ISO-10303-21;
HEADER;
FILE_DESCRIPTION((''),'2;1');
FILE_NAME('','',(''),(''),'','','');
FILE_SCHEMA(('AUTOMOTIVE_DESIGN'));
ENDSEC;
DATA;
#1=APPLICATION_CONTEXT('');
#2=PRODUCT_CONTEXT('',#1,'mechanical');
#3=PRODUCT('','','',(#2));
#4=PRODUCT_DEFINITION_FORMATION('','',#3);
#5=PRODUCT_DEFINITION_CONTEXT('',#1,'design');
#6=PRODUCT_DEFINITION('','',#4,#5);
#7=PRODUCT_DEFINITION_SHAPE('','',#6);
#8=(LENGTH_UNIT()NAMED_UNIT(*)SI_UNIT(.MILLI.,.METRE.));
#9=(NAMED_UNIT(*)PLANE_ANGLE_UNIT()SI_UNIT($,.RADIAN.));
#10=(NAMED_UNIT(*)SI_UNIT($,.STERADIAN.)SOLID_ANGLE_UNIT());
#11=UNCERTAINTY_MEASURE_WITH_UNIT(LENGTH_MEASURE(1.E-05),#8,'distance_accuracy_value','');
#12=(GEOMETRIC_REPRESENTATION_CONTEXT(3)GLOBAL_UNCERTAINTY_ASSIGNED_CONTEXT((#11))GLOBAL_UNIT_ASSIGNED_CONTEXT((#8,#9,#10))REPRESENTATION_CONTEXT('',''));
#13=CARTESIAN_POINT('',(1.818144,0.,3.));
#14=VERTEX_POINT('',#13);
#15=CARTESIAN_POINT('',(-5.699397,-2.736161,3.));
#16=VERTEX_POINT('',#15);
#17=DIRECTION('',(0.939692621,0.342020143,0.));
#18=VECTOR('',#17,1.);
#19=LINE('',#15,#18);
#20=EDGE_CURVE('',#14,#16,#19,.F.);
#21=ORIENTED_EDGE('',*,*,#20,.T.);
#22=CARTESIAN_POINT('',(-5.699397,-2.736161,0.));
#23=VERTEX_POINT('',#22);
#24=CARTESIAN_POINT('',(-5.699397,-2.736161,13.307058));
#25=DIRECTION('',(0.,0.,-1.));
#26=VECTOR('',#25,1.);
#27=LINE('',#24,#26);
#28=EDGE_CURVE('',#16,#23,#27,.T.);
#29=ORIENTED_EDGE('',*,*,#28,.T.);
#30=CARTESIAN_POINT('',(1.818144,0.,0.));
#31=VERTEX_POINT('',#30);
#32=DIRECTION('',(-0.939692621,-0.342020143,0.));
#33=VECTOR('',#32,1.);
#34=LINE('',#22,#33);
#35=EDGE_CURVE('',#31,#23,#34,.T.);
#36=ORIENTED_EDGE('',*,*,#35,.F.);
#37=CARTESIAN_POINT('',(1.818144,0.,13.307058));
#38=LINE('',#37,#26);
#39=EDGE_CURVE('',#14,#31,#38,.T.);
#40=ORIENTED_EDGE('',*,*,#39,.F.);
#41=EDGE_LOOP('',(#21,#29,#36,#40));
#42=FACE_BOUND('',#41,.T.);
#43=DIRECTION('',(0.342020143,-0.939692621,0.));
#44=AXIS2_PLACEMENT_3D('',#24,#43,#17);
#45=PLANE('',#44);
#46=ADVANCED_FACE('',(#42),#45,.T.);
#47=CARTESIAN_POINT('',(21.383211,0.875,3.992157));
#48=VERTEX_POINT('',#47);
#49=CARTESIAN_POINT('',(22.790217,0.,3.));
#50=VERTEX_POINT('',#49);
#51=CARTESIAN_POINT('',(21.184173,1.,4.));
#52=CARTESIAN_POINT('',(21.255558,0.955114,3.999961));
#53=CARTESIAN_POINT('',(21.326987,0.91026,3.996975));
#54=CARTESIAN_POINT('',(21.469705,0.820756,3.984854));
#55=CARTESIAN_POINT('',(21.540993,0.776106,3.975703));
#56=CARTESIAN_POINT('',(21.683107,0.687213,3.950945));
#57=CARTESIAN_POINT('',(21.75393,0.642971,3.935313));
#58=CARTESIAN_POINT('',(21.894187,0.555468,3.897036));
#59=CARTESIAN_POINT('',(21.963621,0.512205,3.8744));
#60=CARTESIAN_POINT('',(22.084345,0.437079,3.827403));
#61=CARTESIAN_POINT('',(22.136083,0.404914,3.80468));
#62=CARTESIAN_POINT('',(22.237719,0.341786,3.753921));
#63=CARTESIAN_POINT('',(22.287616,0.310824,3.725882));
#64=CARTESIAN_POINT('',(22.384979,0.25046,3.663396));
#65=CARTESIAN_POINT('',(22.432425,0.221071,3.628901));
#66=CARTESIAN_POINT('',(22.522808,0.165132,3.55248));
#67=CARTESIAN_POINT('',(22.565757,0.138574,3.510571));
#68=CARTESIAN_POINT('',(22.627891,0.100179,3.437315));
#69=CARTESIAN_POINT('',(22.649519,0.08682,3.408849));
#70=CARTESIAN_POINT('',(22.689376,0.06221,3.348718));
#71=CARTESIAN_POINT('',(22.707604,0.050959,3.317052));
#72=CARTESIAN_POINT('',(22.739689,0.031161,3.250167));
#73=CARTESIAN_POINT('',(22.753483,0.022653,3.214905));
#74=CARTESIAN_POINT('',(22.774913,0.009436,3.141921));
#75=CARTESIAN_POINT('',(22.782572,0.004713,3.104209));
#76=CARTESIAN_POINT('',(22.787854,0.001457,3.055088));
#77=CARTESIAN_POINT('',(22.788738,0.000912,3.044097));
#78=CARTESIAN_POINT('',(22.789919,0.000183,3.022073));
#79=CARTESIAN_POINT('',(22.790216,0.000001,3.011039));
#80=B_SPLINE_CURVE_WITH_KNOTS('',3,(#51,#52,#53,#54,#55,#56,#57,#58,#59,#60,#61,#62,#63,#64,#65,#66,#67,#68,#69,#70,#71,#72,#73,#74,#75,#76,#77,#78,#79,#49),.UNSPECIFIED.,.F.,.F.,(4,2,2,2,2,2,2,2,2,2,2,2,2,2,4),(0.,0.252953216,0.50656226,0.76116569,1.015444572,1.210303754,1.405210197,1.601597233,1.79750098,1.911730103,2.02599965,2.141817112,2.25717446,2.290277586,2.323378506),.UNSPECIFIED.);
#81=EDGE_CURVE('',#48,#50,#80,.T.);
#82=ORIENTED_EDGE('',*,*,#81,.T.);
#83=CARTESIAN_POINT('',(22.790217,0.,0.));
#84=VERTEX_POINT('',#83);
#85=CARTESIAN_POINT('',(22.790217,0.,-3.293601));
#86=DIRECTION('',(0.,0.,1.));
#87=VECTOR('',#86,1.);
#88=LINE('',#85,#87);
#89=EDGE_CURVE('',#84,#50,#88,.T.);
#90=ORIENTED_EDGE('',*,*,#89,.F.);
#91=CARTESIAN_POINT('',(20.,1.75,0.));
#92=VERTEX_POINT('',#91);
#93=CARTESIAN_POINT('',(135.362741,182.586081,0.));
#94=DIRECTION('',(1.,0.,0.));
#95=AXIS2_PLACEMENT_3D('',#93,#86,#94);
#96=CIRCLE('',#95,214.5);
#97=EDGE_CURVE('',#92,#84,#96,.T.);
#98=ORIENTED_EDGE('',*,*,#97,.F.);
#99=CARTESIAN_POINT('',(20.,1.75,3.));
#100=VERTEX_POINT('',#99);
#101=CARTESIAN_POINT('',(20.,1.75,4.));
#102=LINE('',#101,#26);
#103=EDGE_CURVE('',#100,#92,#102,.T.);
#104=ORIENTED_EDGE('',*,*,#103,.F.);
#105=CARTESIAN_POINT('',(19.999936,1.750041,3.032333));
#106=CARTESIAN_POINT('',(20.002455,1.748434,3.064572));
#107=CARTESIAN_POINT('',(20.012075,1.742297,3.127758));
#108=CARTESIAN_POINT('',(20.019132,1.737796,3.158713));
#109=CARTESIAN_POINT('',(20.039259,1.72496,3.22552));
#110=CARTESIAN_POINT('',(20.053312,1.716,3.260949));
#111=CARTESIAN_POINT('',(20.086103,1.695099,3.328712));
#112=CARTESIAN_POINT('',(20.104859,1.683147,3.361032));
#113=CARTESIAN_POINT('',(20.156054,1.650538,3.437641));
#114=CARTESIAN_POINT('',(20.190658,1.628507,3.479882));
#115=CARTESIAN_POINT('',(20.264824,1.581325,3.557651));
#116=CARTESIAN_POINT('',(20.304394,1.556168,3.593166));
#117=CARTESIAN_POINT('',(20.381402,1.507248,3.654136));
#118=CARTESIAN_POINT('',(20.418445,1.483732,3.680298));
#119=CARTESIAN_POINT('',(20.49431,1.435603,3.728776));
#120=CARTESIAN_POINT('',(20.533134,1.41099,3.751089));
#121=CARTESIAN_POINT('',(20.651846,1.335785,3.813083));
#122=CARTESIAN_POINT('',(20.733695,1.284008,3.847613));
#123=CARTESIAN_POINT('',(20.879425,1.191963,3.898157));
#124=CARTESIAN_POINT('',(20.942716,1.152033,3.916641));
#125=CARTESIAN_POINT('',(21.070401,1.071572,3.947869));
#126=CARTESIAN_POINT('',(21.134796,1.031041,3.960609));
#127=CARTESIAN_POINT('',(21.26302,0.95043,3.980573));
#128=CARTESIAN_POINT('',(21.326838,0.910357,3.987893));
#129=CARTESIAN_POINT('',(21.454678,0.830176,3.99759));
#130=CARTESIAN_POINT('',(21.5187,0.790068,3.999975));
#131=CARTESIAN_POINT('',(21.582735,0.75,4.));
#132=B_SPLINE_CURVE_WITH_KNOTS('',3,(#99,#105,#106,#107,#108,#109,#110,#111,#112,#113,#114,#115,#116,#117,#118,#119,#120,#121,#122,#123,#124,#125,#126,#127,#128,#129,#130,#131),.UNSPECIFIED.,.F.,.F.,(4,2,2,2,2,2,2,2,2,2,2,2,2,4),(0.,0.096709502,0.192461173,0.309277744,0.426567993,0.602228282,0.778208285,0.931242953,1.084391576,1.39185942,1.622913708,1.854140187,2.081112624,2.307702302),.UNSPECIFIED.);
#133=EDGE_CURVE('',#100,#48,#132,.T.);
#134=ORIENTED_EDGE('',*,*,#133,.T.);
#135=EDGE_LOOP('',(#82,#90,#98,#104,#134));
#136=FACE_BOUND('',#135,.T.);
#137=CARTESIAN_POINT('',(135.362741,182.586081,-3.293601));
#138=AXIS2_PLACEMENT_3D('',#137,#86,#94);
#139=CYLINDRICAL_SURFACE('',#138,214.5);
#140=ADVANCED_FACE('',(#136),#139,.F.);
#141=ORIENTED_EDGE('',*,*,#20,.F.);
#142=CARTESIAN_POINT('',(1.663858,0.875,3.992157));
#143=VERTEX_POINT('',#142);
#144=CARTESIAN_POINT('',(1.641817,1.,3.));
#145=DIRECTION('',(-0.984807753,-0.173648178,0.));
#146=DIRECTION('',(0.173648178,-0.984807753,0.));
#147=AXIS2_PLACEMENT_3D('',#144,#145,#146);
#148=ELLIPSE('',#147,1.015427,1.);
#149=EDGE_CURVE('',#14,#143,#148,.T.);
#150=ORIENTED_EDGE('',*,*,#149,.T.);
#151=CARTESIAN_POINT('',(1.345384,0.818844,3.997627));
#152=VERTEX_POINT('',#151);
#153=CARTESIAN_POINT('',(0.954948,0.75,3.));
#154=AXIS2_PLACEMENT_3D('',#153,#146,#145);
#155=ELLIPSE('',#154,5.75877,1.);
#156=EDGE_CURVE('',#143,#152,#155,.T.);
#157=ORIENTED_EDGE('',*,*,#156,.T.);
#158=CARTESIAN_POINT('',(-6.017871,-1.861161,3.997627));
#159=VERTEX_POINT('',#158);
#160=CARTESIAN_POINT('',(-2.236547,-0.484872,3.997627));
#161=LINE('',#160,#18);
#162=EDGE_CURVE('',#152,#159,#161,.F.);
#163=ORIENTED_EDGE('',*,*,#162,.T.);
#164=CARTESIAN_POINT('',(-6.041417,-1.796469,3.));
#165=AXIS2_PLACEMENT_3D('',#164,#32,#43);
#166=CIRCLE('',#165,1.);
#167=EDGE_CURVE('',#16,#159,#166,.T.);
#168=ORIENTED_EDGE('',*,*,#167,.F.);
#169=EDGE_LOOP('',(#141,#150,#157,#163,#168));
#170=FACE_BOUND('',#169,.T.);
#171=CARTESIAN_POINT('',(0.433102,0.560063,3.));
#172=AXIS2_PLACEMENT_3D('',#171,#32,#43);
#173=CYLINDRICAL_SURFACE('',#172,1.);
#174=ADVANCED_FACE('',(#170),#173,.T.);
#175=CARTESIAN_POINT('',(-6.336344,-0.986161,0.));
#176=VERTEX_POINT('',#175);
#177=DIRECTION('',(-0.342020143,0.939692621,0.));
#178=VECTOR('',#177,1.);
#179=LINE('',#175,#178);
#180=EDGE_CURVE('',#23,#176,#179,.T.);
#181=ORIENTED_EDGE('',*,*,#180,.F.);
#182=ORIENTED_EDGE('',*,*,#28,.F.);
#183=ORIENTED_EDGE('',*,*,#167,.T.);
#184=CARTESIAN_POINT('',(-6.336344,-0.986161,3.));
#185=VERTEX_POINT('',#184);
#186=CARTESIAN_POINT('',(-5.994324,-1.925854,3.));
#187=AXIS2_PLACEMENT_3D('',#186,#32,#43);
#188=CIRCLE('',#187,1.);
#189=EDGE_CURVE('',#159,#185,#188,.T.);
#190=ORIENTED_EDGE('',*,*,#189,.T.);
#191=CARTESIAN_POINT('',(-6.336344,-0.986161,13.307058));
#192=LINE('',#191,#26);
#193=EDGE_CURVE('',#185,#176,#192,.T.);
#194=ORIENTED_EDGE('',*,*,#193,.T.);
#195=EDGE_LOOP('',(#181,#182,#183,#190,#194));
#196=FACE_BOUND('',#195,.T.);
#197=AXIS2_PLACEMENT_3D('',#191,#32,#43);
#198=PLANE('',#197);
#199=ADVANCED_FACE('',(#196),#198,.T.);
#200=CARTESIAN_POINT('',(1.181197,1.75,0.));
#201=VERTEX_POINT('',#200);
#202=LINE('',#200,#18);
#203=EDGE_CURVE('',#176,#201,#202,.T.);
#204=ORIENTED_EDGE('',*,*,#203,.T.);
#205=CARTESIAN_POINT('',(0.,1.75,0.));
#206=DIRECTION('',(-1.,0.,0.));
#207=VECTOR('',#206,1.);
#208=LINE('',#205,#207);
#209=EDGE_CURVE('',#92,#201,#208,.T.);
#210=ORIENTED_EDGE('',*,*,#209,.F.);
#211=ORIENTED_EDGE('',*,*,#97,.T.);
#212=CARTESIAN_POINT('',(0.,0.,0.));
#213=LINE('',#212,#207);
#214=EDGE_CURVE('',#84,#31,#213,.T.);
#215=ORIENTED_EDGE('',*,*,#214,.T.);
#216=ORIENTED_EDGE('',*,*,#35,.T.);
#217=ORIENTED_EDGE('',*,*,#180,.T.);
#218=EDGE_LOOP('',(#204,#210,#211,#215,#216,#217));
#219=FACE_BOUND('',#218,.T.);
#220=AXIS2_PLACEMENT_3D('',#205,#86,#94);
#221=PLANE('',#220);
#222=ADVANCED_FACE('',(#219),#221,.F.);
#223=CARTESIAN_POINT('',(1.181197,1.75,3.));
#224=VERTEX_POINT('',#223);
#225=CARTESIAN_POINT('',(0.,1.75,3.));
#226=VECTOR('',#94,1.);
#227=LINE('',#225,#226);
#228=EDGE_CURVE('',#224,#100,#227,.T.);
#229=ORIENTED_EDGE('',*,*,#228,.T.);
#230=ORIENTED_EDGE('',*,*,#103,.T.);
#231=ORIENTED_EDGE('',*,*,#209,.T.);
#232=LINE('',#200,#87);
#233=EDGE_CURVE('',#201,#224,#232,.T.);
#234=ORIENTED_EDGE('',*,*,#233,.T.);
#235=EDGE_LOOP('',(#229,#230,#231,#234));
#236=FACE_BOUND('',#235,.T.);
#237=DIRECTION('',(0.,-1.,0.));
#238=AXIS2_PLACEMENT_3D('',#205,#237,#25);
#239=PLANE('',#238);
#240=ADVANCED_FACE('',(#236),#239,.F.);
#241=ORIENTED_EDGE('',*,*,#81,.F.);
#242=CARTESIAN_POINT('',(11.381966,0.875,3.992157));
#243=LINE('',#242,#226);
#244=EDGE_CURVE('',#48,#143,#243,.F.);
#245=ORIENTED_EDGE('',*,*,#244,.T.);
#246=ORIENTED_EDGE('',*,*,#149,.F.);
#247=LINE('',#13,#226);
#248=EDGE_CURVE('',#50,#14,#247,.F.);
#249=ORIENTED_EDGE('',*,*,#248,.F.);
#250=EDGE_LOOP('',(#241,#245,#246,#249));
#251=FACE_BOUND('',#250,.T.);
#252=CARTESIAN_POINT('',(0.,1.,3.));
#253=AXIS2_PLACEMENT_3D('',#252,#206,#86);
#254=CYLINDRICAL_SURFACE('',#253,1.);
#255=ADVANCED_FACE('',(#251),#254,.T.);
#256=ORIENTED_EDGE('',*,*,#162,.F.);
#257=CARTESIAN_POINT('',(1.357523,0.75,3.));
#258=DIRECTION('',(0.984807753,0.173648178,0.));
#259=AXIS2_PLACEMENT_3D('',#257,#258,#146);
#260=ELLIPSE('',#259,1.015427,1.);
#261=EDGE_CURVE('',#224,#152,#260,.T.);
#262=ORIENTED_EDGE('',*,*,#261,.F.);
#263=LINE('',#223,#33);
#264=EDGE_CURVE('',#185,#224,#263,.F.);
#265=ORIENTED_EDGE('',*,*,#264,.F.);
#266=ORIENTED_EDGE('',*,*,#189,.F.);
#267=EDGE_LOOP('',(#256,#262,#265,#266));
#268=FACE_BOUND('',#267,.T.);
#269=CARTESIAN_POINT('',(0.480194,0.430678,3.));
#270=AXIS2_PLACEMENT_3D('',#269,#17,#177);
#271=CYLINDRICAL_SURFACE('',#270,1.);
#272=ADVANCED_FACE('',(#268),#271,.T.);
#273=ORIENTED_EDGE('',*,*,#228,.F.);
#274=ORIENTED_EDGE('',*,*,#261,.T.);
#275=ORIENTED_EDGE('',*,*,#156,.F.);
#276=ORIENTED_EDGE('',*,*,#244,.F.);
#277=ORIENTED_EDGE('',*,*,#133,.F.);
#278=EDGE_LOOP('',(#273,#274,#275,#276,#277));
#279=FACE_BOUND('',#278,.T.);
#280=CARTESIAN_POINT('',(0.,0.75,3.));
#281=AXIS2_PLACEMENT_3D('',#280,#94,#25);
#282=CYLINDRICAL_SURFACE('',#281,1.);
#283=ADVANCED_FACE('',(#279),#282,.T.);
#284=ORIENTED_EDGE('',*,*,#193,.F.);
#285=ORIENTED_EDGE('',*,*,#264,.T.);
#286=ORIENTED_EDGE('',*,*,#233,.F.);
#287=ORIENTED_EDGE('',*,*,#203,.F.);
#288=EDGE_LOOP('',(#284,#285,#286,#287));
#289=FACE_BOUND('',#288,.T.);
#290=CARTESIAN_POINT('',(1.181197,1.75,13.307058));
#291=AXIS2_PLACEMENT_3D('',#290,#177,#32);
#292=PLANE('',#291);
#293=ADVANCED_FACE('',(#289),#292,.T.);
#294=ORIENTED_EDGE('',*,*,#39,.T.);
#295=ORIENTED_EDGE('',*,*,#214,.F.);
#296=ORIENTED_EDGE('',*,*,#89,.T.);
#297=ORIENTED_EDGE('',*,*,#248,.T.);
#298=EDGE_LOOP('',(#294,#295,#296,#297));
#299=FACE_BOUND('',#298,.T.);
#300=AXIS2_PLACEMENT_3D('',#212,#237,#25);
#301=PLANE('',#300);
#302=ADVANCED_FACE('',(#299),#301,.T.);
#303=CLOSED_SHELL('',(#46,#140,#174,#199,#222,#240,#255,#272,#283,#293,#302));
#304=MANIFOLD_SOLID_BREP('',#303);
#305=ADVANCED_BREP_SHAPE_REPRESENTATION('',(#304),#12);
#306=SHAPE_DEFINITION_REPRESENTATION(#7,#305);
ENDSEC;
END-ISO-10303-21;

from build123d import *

# Parameters (mm, degrees)
SKETCH_1_W          = 20
SKETCH_1_H          = 4
EXTRUDE_1_DEPTH     = 1.75
EXTRUDE_2_DEPTH     = 4
EXTRUDE_3_DEPTH     = 4
CUT_EXTRUDE_1_DEPTH = 24.299797316
FILLET_4_R          = 1


with BuildPart() as part:
    # 草图1 → 凸台-拉伸1 (new body)
    with BuildSketch(Plane(origin=(0, 0, 0), x_dir=(1, 0, 0), z_dir=(0, 1, 0))):
        with Locations((10, -2)):
            Rectangle(SKETCH_1_W, SKETCH_1_H)
    extrude(amount=EXTRUDE_1_DEPTH)

    # 草图6 → 凸台-拉伸2 (add)
    with BuildSketch(Plane.XY.offset(4)):
        with BuildLine():
            Line((20, 0), (22.790216698, 0))
            ThreePointArc((22.790216698, 0), (21.391749441, 0.869644524), (20, 1.75))
            Line((20, 1.75), (20, 0))
        make_face()
    extrude(amount=-EXTRUDE_2_DEPTH)

    # 草图7 → 凸台-拉伸3 (add)
    with BuildSketch(Plane(origin=(0, 0, 0), x_dir=(-1, 0, 0), z_dir=(0, 0, -1))):
        Polygon((5.699396556, -2.736161147), (-1.818144411, 0), (-1.181196501, 1.75), (6.336344466, -0.986161147), align=None)
    extrude(amount=-EXTRUDE_3_DEPTH)

    # 草图8 → 切除-拉伸1 (cut, through all)
    with BuildSketch(Plane.XY.offset(4)):
        Polygon((1.181196501, 1.75), (-6.336344466, -0.986161147), (0, 1.75), align=None)
    extrude(amount=-CUT_EXTRUDE_1_DEPTH, mode=Mode.SUBTRACT)

    # 圆角4
    # the kernel refuses this fillet: 1 mm, written as the material it takes off along each edge
    with BuildSketch(Plane(origin=(-8.048628108, -3.591211505, 4), x_dir=(-0.3420201433256633, 0.9396926207859104, 0), z_dir=(0.9396926207859104, 0.3420201433256633, 0))) as fillet_4_piece_1_section:
        with BuildLine():
            CenterArc((FILLET_4_R, -FILLET_4_R), FILLET_4_R, 90, 90)
            Line((0, -FILLET_4_R), (0, 0))
            Line((0, 0), (FILLET_4_R, 0))
        make_face()
    fillet_4_piece_1 = extrude(amount=13, mode=Mode.PRIVATE)
    fillet_4_piece_1 = fillet_4_piece_1 - Plane(origin=(-8.048628108, 1, 3), x_dir=(0, 0, 1), z_dir=(-1, 0, 0)) * Cylinder(1, 31, mode=Mode.PRIVATE)
    add(fillet_4_piece_1, mode=Mode.SUBTRACT)
    with BuildSketch(Plane(origin=(-0.681855589, 0, 4), x_dir=(0, 1, 0), z_dir=(1, 0, 0))) as fillet_4_piece_2_section:
        with BuildLine():
            CenterArc((FILLET_4_R, -FILLET_4_R), FILLET_4_R, 90, 90)
            Line((0, -FILLET_4_R), (0, 0))
            Line((0, 0), (FILLET_4_R, 0))
        make_face()
    fillet_4_piece_2 = extrude(amount=25.972072288, mode=Mode.PRIVATE)
    fillet_4_piece_2 = fillet_4_piece_2 - Plane(origin=(-0.731431287, 0.136208109, 3), x_dir=(0, 0, 1), z_dir=(-0.9396926207859104, -0.3420201433256633, 0)) * Cylinder(1, 56, mode=Mode.PRIVATE)
    add(fillet_4_piece_2, mode=Mode.SUBTRACT)
    with BuildSketch(Plane(origin=(5.174890139, 3.203585609, 4), x_dir=(0.34202014332566305, -0.9396926207859104, 0), z_dir=(-0.9396926207859105, -0.3420201433256631, 0))) as fillet_4_piece_3:
        with BuildLine():
            CenterArc((FILLET_4_R, -FILLET_4_R), FILLET_4_R, 90, 90)
            Line((0, -FILLET_4_R), (0, 0))
            Line((0, 0), (FILLET_4_R, 0))
        make_face()
    extrude(amount=14.75, mode=Mode.SUBTRACT)
    with BuildSketch(Plane(origin=(22.5, 1.75, 4), x_dir=(0, -1, 0), z_dir=(-1, 0, 0))) as fillet_4_piece_4:
        with BuildLine():
            CenterArc((FILLET_4_R, -FILLET_4_R), FILLET_4_R, 90, 90)
            Line((0, -FILLET_4_R), (0, 0))
            Line((0, 0), (FILLET_4_R, 0))
        make_face()
    extrude(amount=25.568803499, mode=Mode.SUBTRACT)


solid = part.part
